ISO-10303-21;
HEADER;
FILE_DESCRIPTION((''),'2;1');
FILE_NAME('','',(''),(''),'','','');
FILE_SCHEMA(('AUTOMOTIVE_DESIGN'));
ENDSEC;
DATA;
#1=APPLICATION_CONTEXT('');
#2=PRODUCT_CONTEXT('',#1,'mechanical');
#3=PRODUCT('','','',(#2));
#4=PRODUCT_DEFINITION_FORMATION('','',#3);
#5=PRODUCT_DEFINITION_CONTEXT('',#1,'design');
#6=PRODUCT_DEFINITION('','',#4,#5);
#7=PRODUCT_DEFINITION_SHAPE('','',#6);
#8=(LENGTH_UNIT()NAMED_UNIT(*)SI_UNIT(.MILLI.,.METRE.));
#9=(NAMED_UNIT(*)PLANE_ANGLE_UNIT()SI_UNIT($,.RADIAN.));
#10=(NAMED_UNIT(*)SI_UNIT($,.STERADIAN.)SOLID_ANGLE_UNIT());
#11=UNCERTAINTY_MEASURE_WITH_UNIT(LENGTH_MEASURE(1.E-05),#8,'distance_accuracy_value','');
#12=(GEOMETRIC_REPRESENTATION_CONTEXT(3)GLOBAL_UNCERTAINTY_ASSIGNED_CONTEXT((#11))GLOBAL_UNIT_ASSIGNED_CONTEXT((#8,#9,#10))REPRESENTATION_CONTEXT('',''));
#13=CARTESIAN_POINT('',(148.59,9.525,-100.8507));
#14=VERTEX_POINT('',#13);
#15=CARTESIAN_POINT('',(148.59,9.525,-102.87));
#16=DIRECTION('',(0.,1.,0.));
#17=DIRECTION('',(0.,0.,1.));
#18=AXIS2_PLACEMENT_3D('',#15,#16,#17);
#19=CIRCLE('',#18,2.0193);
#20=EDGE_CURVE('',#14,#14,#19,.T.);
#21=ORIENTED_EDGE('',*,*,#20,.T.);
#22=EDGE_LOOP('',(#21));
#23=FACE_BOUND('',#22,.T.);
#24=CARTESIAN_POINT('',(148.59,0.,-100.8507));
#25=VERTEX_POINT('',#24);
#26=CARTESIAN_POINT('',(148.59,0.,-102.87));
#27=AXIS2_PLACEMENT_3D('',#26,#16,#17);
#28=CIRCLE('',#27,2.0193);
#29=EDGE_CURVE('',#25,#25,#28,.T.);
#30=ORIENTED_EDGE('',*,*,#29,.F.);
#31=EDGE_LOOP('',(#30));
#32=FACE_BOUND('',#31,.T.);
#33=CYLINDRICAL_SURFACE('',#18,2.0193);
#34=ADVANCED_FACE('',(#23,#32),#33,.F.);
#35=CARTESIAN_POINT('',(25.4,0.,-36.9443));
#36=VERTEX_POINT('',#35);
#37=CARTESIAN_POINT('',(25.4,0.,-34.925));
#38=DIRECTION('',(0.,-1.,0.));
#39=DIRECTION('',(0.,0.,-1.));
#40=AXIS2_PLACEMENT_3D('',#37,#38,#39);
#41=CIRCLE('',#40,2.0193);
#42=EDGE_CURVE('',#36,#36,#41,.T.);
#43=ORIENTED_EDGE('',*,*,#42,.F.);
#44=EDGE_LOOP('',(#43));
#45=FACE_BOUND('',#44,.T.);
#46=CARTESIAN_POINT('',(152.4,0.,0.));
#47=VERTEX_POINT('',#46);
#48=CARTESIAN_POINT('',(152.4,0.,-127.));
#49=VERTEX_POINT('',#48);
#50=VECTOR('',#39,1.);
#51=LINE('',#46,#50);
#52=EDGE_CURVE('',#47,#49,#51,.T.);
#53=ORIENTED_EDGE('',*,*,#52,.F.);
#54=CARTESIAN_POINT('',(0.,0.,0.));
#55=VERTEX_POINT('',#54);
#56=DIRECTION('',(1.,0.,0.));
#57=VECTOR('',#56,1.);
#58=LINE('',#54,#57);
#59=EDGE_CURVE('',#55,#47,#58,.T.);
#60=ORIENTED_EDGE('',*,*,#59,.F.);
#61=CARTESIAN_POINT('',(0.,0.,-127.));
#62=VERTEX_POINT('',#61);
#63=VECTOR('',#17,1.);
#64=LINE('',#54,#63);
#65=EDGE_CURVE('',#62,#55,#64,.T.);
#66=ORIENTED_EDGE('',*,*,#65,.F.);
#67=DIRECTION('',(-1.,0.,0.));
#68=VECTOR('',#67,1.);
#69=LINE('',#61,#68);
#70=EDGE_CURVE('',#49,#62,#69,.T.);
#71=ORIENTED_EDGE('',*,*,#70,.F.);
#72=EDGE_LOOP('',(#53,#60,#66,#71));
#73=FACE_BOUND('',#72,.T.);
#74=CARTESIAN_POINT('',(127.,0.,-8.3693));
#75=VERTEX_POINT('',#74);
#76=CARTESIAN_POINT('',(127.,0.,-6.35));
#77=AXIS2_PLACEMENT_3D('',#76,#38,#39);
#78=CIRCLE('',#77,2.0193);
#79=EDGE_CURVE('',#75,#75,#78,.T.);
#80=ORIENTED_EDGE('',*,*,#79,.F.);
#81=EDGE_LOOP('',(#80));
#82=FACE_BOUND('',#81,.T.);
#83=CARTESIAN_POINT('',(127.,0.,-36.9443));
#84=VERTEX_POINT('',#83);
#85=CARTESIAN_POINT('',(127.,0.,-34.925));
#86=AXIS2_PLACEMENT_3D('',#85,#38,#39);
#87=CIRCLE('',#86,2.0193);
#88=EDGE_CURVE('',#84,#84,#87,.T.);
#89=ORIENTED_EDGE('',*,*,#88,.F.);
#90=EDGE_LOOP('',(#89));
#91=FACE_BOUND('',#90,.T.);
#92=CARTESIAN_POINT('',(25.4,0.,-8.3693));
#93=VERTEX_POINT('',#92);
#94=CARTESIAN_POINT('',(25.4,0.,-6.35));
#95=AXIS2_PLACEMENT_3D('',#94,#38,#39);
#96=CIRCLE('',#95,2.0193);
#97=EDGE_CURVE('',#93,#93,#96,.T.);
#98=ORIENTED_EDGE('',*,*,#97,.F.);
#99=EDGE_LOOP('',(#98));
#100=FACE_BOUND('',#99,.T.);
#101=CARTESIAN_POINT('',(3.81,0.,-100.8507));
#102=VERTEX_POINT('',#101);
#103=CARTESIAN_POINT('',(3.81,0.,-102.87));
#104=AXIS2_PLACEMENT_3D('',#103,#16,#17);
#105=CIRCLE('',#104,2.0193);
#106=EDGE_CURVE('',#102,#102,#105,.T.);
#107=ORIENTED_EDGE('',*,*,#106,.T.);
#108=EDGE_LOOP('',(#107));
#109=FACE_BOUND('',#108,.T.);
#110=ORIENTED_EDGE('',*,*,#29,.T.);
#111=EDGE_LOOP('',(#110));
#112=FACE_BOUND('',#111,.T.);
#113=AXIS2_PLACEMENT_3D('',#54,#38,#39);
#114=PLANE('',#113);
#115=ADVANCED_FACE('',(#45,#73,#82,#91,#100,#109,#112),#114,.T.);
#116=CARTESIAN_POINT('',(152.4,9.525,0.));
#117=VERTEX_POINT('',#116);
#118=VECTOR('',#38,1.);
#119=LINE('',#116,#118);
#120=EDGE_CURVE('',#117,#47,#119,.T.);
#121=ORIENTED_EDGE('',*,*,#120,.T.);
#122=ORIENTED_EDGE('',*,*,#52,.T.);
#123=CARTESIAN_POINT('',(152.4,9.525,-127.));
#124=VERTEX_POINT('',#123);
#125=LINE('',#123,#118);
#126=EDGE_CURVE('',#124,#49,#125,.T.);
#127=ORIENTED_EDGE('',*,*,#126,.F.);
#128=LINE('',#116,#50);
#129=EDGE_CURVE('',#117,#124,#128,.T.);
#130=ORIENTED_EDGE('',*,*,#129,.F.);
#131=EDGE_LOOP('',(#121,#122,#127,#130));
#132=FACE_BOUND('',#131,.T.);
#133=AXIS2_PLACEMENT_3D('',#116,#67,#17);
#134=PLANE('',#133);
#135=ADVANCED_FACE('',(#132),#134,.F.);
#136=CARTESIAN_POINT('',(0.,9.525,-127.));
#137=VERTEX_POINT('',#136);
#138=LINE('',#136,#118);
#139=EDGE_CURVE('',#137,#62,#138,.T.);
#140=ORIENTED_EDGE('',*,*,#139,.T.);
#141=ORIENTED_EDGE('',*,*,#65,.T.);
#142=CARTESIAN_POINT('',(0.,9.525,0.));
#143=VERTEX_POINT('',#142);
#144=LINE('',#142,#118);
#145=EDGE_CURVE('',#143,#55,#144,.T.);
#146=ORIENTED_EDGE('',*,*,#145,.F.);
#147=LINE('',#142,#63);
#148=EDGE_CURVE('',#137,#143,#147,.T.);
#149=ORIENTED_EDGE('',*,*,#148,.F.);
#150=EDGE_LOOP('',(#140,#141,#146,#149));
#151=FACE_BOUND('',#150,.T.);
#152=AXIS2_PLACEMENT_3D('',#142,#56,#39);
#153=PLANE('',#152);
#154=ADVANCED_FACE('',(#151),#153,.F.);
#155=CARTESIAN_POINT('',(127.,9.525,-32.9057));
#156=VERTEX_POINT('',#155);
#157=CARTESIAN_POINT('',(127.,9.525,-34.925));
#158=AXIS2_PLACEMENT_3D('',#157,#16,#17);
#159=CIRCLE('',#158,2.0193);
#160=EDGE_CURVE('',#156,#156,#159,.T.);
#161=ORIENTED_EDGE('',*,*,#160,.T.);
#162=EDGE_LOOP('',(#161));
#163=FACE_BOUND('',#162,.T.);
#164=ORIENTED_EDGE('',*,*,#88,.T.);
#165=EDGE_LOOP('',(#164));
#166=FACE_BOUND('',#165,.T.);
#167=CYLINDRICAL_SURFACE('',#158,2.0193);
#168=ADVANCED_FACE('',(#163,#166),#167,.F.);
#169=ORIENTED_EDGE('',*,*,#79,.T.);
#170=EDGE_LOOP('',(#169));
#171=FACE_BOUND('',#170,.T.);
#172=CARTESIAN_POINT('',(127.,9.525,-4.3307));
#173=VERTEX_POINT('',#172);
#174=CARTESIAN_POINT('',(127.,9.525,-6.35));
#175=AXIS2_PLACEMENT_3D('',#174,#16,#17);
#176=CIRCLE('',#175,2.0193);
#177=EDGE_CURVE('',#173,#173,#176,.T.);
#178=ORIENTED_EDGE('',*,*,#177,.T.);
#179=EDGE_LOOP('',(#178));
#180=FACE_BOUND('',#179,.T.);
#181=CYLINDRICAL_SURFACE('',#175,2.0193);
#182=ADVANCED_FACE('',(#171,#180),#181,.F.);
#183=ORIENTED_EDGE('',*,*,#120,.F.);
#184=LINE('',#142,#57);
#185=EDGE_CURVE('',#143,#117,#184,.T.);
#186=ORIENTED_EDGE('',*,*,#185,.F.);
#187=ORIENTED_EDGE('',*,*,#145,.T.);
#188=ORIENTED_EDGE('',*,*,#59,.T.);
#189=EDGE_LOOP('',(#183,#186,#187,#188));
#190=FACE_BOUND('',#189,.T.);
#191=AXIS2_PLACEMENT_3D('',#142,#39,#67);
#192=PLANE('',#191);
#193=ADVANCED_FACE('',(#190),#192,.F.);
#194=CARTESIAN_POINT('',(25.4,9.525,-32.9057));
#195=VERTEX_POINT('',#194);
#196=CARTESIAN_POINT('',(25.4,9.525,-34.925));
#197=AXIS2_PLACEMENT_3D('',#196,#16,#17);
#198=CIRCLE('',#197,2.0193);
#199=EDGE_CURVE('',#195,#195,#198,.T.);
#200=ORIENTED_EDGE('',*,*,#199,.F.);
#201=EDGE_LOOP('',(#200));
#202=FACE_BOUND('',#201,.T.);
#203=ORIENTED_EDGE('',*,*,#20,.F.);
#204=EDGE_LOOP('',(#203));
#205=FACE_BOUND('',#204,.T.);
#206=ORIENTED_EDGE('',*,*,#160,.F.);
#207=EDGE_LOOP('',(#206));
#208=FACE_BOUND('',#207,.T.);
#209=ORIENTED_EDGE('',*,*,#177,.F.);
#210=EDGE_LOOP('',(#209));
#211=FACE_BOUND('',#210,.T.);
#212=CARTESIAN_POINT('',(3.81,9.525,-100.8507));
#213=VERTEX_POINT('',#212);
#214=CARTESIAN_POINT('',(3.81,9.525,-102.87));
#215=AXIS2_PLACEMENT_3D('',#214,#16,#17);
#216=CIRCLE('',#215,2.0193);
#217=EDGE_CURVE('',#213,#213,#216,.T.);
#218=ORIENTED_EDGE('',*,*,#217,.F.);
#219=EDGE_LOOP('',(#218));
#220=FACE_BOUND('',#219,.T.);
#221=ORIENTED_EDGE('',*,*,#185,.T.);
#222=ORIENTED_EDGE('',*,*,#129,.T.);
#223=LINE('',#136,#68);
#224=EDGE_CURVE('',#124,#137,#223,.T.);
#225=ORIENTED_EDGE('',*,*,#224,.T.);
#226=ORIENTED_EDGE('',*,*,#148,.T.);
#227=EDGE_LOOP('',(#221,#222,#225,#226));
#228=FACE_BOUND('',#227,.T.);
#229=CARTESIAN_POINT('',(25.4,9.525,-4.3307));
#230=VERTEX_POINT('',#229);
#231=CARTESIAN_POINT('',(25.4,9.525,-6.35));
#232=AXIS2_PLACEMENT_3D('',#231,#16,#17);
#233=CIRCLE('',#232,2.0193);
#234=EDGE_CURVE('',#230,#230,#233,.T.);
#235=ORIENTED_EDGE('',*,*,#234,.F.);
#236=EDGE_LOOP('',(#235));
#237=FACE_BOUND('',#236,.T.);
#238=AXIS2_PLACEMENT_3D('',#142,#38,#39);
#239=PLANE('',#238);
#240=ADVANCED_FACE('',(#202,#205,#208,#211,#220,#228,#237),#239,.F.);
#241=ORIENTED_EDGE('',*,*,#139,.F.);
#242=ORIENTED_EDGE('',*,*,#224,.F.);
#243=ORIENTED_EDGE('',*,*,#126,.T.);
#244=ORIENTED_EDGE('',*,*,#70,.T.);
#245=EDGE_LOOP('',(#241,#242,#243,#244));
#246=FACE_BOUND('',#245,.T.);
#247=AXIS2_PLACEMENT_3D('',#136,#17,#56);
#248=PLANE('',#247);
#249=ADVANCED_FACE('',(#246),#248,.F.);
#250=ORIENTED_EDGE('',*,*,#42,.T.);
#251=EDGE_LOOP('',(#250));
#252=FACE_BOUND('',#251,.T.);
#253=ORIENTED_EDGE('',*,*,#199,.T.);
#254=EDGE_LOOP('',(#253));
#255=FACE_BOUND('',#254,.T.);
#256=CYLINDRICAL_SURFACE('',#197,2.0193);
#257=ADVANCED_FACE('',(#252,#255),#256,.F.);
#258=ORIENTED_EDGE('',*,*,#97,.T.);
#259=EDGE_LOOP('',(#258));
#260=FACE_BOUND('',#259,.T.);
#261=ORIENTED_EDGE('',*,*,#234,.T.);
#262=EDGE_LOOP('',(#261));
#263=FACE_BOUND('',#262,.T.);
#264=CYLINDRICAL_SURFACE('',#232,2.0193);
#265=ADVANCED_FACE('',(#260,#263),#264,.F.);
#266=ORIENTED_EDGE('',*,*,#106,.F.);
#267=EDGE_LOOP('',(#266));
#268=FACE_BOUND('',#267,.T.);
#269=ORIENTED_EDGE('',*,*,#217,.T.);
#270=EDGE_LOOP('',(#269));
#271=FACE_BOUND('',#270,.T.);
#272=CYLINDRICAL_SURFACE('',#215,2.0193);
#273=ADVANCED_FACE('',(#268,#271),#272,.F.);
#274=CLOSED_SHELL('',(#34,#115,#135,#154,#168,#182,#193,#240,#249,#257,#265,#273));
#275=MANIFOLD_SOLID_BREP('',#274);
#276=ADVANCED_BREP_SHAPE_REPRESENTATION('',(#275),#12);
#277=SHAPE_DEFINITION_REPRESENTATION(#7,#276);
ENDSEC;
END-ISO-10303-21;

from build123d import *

# Parameters (mm, degrees)
SKETCH1_W                      = 152.4
SKETCH1_H                      = 127
BOSS_EXTRUDE1_DEPTH            = 9.525
F_10_32_TAPPED_HOLE1_D         = 4.0386
F_10_32_TAPPED_HOLE2_OUTLINE_R = 2.0193
F_10_32_TAPPED_HOLE2_DEPTH     = 9.525


# Read off the part's stored shape, not the designer's step: #10-32 Tapped Hole2
with BuildPart() as part:
    # Sketch1 → Boss-Extrude1 (new body)
    with BuildSketch(Plane(origin=(0, 0, 0), x_dir=(1, 0, 0), z_dir=(0, 1, 0))):
        with Locations((76.2, 63.5)):
            Rectangle(SKETCH1_W, SKETCH1_H)
    extrude(amount=BOSS_EXTRUDE1_DEPTH)

    # #10-32 Tapped Hole1 (through all)
    with Locations(Plane(origin=(25.4, 9.525, -6.35), x_dir=(0, 0, 1), z_dir=(0, 1, 0))):
        with Locations((0, 0), (-28.575, 0), (-28.575, 101.6), (0, 101.6)):
            Hole(F_10_32_TAPPED_HOLE1_D / 2)

    # #10-32 Tapped Hole2 outline → #10-32 Tapped Hole2 (cut)
    with BuildSketch(Plane(origin=(0, 0, 0), x_dir=(1, 0, 0), z_dir=(0, 1, 0))):
        with Locations((148.59, 102.87)):
            Circle(F_10_32_TAPPED_HOLE2_OUTLINE_R)
        with Locations((3.81, 102.87)):
            Circle(F_10_32_TAPPED_HOLE2_OUTLINE_R)
    extrude(amount=F_10_32_TAPPED_HOLE2_DEPTH, mode=Mode.SUBTRACT)


solid = part.part
